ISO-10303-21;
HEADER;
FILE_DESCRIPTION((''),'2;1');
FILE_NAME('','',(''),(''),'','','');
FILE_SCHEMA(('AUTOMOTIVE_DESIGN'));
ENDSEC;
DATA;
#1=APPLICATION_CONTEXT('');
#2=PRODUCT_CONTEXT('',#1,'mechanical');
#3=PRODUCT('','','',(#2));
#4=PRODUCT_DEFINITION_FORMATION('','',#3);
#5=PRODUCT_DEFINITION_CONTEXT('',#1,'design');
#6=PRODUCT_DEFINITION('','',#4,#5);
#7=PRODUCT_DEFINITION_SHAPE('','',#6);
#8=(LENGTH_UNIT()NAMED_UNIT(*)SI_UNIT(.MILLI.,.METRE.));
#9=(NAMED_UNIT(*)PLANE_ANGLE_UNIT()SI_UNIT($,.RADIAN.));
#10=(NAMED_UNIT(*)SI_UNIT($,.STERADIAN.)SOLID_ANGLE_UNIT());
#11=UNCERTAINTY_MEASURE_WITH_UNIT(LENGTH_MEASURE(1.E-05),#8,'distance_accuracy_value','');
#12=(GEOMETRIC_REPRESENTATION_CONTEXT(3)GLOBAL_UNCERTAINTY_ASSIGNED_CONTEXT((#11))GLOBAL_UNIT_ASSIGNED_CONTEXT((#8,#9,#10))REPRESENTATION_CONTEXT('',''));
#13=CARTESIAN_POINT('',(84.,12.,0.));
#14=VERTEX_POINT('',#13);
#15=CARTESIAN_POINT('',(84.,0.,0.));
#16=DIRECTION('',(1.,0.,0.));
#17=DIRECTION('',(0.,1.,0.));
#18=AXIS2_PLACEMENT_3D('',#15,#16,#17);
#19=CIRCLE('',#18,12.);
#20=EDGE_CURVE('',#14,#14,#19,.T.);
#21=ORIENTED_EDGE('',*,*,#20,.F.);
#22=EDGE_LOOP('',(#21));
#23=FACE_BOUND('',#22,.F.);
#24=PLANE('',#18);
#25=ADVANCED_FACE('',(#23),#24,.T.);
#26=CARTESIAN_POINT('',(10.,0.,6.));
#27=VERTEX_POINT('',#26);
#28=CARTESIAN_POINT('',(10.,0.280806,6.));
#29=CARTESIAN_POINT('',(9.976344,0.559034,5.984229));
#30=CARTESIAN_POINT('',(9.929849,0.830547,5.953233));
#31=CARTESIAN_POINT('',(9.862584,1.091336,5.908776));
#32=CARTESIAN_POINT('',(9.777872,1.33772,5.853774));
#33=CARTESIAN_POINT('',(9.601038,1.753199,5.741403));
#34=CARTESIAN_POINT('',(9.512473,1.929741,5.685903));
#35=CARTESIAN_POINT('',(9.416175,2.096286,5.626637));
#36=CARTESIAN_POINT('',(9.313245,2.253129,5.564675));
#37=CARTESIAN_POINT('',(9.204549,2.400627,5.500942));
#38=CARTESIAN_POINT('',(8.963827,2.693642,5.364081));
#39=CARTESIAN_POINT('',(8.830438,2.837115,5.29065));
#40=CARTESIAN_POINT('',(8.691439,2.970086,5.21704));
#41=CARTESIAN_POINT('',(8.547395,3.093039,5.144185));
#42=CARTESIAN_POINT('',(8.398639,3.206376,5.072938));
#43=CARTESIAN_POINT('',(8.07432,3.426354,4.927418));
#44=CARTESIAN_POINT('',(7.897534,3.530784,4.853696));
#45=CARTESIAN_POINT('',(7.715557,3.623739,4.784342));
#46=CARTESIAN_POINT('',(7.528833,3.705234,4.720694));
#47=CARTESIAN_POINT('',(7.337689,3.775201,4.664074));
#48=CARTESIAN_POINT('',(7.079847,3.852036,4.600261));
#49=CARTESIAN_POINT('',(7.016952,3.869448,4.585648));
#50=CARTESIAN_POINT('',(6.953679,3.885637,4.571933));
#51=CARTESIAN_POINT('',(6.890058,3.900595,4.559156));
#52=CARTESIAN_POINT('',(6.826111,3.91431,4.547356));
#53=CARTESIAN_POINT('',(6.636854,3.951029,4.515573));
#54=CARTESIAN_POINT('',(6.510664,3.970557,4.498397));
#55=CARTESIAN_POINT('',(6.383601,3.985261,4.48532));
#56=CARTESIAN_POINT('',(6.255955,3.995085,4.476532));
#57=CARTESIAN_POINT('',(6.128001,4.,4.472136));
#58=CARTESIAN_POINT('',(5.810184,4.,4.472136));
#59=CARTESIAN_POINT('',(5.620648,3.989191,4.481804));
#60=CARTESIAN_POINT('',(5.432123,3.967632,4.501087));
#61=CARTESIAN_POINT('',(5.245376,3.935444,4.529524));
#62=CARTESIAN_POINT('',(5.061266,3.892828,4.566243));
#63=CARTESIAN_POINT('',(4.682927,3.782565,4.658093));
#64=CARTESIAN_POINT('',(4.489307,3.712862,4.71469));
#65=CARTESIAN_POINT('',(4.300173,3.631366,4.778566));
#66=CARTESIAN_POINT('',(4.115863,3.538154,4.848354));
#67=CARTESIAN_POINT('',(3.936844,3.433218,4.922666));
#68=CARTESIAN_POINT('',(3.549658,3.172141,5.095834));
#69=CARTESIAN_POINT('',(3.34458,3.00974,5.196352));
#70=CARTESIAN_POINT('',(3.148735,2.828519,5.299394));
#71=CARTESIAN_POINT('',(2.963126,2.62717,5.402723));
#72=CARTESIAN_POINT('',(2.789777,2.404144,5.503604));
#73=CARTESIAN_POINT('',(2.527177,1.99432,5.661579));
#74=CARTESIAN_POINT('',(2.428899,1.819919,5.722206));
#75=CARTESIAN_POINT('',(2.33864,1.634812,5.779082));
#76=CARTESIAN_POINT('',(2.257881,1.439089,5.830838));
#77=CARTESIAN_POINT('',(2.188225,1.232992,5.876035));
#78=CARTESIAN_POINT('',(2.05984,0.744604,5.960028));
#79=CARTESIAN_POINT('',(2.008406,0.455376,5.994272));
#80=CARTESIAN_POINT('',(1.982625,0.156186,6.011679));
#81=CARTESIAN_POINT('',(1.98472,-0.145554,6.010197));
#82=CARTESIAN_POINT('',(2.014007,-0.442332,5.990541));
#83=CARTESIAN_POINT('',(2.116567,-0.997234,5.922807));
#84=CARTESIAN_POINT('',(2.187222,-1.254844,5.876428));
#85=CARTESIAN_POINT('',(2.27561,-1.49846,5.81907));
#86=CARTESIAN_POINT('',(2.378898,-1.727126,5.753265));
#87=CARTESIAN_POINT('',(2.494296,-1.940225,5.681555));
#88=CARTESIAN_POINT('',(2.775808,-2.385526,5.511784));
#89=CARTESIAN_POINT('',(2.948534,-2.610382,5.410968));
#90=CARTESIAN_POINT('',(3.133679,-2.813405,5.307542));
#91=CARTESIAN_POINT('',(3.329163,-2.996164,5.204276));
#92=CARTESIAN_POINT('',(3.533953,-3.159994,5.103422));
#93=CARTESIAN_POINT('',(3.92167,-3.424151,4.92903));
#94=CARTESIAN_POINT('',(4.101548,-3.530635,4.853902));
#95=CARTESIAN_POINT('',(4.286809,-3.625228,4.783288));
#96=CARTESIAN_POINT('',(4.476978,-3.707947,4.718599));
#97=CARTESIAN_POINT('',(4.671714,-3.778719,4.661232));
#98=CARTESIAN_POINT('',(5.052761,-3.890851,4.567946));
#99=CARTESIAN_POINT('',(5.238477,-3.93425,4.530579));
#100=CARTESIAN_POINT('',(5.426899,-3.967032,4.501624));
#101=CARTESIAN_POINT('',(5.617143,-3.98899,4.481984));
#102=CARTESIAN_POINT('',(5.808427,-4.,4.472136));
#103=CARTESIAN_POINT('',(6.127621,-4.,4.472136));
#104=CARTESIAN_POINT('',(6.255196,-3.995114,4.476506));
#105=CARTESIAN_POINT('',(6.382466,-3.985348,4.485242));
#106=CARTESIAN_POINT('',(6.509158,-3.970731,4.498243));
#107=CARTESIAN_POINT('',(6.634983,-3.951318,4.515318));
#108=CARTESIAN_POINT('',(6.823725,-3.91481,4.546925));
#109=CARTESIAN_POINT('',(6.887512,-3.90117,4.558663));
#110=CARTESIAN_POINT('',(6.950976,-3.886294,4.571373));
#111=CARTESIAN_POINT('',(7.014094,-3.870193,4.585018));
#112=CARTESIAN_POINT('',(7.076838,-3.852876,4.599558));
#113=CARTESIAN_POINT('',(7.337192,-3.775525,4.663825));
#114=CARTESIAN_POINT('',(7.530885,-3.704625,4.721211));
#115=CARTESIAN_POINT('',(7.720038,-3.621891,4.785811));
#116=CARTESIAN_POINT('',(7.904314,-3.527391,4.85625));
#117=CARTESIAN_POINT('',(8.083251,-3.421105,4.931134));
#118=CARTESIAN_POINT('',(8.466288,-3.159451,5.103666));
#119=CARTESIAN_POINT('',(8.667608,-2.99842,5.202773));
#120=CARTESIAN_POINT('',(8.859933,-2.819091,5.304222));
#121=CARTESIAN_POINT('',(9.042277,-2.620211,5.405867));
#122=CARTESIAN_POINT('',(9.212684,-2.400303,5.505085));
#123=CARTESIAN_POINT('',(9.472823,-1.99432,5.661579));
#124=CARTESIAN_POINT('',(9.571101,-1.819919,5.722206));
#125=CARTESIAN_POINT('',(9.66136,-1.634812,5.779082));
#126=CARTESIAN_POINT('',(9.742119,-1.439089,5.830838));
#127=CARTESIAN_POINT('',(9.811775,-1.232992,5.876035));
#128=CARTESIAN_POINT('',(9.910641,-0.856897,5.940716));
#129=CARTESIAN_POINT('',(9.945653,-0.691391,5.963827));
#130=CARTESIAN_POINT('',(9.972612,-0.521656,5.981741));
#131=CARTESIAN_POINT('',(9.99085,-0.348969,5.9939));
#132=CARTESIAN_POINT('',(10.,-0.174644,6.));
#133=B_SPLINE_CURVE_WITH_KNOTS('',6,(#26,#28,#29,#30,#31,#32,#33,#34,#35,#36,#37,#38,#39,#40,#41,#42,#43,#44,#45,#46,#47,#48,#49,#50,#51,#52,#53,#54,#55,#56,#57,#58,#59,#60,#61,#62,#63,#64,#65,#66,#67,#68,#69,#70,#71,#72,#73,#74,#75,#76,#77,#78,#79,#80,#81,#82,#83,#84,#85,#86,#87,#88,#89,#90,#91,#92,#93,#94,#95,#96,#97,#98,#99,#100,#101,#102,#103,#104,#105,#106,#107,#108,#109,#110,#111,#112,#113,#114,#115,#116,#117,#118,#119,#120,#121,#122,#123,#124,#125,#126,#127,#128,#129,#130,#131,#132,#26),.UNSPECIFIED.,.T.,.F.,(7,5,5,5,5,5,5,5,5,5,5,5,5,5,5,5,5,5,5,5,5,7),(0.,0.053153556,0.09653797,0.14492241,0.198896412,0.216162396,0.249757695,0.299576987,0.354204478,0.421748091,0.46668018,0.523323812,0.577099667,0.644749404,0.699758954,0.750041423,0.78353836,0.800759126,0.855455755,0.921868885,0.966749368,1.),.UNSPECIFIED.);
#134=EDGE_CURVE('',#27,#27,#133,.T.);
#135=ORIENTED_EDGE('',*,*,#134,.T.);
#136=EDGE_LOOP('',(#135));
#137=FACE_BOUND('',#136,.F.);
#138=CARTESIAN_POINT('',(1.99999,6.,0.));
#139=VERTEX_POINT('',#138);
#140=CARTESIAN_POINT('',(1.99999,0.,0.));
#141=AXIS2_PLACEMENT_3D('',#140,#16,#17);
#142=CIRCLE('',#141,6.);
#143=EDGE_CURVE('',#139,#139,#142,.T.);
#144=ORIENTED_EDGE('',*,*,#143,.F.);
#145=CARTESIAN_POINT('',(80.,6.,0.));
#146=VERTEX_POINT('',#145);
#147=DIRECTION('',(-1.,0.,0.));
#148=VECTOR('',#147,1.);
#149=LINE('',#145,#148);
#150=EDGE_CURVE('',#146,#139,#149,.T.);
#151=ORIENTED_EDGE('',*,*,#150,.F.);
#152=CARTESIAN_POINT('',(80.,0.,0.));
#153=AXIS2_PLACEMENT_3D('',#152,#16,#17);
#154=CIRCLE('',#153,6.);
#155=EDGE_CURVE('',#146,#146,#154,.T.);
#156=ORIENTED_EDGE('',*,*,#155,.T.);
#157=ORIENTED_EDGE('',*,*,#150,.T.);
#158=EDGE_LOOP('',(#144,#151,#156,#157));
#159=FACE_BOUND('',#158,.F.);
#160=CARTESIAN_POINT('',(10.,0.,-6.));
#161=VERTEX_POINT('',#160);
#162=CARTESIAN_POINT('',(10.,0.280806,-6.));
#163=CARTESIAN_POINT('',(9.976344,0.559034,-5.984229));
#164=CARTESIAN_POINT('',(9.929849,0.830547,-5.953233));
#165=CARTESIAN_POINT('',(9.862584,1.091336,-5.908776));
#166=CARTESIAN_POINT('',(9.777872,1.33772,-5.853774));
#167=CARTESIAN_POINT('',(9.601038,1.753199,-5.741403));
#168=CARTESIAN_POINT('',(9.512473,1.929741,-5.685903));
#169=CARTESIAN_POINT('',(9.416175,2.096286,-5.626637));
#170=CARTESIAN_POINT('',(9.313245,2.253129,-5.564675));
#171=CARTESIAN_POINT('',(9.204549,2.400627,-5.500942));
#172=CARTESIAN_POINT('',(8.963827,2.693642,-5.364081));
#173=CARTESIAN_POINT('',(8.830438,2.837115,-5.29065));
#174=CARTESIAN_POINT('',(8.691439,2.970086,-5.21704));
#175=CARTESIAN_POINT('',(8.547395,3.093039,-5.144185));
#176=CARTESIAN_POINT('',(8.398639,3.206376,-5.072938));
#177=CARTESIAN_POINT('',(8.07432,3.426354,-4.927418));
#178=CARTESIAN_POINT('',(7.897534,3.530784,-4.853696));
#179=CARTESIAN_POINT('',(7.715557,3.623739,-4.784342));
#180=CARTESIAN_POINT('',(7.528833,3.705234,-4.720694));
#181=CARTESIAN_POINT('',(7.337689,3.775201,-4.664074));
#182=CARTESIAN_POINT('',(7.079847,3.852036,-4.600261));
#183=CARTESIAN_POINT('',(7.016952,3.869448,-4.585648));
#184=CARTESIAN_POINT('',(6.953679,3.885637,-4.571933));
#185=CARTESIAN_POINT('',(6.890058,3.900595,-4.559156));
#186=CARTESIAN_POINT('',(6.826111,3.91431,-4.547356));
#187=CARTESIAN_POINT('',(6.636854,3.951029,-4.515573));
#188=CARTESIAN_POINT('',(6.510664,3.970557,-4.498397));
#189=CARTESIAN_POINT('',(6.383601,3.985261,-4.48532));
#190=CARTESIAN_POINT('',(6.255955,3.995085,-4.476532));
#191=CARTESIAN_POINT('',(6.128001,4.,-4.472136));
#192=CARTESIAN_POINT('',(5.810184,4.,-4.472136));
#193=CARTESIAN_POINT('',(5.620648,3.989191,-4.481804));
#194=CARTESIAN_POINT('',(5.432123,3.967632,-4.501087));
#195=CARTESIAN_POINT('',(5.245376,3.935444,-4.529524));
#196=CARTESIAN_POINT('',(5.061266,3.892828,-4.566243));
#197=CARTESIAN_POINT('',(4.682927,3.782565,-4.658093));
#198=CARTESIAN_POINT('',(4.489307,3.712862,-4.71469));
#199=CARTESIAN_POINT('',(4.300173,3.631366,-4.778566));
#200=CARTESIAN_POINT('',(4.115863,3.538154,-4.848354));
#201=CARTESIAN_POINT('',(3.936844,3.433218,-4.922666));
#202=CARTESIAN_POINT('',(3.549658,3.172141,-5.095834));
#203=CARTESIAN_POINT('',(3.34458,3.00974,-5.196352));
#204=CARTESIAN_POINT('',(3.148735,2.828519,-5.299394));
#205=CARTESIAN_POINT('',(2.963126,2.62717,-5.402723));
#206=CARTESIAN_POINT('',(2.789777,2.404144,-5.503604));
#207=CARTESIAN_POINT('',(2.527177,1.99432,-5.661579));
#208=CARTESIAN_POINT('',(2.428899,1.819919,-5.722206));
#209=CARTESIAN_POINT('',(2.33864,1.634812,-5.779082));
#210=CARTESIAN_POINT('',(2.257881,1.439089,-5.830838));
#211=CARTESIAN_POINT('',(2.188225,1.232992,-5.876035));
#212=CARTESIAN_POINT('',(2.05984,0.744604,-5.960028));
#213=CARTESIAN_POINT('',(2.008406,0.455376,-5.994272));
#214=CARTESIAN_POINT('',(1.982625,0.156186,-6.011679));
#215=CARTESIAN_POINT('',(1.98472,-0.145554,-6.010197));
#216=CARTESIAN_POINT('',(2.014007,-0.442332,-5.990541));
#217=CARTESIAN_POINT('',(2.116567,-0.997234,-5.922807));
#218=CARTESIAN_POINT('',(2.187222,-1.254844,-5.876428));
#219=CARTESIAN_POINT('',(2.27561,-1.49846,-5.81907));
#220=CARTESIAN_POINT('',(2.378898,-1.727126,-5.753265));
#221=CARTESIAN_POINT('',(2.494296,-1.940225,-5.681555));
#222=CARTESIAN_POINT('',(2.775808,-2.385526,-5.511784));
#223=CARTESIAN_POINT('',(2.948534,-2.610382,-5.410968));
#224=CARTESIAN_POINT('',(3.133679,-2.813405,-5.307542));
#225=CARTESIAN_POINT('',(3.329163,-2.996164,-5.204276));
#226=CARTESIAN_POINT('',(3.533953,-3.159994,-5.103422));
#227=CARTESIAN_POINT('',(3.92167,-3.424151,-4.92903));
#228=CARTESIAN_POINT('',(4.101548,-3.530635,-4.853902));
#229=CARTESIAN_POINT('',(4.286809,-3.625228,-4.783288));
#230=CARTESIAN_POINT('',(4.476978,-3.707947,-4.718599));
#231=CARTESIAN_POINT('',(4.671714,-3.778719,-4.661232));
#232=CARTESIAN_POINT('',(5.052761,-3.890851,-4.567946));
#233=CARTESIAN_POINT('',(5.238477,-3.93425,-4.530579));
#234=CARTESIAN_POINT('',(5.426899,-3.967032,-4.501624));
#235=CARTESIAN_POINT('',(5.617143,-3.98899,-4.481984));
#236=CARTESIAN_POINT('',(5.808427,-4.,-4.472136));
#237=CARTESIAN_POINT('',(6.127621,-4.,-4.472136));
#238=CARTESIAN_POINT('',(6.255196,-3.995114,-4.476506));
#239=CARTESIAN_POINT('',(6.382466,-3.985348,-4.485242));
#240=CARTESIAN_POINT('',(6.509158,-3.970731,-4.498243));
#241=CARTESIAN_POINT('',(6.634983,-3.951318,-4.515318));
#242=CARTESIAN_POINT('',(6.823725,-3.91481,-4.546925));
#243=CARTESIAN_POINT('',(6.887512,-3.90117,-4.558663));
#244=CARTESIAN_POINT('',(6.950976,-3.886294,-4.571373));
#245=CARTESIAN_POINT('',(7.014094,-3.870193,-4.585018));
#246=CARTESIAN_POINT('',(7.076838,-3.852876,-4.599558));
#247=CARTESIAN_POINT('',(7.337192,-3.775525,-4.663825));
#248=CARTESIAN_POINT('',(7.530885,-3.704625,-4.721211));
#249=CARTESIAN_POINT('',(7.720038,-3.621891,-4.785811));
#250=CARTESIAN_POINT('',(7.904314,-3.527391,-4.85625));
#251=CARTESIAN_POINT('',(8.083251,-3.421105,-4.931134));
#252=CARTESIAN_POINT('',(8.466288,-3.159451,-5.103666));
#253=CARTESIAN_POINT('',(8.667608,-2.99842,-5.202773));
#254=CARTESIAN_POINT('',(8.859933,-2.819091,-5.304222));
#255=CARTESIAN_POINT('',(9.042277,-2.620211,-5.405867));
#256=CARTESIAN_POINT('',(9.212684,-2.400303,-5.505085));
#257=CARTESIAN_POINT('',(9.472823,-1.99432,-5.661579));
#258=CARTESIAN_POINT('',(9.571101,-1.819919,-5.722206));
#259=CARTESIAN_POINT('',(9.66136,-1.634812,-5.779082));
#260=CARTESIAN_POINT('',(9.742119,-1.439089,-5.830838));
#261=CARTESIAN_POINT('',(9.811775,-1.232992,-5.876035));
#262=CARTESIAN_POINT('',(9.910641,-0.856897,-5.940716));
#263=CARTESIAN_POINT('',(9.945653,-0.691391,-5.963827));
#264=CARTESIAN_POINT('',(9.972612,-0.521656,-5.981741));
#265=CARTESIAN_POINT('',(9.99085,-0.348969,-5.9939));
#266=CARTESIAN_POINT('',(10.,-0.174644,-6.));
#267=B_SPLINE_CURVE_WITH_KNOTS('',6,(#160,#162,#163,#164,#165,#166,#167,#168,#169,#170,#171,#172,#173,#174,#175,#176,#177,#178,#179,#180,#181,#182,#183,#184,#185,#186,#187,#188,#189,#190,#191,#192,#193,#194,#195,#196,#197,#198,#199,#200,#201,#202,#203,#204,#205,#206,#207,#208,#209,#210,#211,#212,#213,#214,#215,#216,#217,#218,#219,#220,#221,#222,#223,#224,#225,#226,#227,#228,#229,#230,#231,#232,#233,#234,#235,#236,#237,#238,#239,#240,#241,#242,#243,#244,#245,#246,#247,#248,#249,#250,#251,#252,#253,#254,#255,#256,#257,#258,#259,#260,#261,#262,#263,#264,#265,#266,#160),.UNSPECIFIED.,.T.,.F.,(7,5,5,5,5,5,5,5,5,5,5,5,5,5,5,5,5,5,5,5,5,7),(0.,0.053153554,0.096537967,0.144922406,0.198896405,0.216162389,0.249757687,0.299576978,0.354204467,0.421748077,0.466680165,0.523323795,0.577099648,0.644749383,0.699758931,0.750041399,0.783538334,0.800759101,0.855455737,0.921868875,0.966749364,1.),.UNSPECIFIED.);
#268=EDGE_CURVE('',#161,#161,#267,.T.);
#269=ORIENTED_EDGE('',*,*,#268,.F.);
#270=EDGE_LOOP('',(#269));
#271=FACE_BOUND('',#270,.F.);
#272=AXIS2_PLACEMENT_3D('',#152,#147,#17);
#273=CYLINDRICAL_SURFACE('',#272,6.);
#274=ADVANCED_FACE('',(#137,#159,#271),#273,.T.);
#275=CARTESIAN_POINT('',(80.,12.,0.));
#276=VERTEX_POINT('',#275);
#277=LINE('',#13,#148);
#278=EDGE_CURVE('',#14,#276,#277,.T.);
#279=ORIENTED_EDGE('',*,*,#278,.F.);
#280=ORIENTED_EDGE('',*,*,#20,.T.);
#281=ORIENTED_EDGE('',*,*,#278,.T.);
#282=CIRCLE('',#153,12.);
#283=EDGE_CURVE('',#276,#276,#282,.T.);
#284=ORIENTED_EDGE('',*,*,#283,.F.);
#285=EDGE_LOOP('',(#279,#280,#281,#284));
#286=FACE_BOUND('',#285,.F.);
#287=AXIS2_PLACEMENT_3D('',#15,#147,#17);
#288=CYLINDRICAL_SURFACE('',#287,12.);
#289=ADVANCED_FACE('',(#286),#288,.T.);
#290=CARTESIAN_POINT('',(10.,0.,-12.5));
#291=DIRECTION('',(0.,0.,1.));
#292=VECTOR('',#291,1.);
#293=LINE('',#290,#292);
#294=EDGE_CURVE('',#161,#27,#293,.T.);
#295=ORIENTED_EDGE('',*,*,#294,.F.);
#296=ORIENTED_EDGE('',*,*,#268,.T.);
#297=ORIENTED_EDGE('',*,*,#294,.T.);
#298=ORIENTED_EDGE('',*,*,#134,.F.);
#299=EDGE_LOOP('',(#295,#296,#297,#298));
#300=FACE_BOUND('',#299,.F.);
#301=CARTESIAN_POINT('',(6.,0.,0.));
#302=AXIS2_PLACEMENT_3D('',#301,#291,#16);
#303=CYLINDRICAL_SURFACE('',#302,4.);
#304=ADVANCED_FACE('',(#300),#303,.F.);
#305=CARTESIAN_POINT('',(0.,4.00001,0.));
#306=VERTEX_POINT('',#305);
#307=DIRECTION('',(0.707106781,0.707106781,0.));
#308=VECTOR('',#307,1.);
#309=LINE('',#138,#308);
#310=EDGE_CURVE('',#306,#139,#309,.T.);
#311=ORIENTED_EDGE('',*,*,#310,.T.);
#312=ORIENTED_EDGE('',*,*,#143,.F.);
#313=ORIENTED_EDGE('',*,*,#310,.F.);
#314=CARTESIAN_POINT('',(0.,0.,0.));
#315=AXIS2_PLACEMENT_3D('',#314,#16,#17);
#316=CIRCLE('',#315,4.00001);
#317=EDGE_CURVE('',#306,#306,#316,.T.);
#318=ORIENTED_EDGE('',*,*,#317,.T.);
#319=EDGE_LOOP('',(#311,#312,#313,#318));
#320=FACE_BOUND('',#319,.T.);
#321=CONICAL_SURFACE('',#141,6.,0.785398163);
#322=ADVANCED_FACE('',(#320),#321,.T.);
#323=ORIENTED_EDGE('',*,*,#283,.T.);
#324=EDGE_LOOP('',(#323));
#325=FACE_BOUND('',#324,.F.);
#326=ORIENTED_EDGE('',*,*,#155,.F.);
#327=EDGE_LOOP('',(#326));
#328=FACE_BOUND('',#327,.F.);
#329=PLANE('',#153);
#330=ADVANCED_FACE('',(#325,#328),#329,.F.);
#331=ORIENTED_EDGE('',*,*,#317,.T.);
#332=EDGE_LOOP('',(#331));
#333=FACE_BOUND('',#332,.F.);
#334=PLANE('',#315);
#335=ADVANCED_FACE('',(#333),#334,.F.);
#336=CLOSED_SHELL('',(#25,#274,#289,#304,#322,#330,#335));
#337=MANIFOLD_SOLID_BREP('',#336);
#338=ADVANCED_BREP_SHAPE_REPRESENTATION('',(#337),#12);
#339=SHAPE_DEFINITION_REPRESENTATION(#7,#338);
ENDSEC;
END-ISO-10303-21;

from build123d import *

# Parameters (mm, degrees)
F2_R     = 4
F3_DEPTH = 12.5
F4_SIZE  = 1.99999


# Not quite as in the source:
# - a fillet or chamfer is up to 0.001 mm smaller than in the source, because OpenCascade refuses the exact size


with BuildPart() as f1:
    # F0 (on Top) → F1 (revolve)
    with BuildSketch(Plane.XY):
        Polygon((0, 6), (0, 0), (84, 0), (84, 12), (80, 12), (80, 6), align=None)
    revolve(axis=Axis((42, 0, 0), (1, 0, 0)))

    # F2 (on Top) → F3 (cut, symmetric)
    with BuildSketch(Plane.XY):
        with Locations((6, 0)):
            Circle(F2_R)
    extrude(amount=F3_DEPTH, both=True, mode=Mode.SUBTRACT)

    # F4 (size 2 in the source; OpenCascade refuses exactly that, so slightly less here)
    f4_edges = [f1.edges().sort_by_distance(p)[0] for p in [
        (0, -6, 0),
    ]]
    chamfer(f4_edges, length=F4_SIZE)


solid = f1.part
